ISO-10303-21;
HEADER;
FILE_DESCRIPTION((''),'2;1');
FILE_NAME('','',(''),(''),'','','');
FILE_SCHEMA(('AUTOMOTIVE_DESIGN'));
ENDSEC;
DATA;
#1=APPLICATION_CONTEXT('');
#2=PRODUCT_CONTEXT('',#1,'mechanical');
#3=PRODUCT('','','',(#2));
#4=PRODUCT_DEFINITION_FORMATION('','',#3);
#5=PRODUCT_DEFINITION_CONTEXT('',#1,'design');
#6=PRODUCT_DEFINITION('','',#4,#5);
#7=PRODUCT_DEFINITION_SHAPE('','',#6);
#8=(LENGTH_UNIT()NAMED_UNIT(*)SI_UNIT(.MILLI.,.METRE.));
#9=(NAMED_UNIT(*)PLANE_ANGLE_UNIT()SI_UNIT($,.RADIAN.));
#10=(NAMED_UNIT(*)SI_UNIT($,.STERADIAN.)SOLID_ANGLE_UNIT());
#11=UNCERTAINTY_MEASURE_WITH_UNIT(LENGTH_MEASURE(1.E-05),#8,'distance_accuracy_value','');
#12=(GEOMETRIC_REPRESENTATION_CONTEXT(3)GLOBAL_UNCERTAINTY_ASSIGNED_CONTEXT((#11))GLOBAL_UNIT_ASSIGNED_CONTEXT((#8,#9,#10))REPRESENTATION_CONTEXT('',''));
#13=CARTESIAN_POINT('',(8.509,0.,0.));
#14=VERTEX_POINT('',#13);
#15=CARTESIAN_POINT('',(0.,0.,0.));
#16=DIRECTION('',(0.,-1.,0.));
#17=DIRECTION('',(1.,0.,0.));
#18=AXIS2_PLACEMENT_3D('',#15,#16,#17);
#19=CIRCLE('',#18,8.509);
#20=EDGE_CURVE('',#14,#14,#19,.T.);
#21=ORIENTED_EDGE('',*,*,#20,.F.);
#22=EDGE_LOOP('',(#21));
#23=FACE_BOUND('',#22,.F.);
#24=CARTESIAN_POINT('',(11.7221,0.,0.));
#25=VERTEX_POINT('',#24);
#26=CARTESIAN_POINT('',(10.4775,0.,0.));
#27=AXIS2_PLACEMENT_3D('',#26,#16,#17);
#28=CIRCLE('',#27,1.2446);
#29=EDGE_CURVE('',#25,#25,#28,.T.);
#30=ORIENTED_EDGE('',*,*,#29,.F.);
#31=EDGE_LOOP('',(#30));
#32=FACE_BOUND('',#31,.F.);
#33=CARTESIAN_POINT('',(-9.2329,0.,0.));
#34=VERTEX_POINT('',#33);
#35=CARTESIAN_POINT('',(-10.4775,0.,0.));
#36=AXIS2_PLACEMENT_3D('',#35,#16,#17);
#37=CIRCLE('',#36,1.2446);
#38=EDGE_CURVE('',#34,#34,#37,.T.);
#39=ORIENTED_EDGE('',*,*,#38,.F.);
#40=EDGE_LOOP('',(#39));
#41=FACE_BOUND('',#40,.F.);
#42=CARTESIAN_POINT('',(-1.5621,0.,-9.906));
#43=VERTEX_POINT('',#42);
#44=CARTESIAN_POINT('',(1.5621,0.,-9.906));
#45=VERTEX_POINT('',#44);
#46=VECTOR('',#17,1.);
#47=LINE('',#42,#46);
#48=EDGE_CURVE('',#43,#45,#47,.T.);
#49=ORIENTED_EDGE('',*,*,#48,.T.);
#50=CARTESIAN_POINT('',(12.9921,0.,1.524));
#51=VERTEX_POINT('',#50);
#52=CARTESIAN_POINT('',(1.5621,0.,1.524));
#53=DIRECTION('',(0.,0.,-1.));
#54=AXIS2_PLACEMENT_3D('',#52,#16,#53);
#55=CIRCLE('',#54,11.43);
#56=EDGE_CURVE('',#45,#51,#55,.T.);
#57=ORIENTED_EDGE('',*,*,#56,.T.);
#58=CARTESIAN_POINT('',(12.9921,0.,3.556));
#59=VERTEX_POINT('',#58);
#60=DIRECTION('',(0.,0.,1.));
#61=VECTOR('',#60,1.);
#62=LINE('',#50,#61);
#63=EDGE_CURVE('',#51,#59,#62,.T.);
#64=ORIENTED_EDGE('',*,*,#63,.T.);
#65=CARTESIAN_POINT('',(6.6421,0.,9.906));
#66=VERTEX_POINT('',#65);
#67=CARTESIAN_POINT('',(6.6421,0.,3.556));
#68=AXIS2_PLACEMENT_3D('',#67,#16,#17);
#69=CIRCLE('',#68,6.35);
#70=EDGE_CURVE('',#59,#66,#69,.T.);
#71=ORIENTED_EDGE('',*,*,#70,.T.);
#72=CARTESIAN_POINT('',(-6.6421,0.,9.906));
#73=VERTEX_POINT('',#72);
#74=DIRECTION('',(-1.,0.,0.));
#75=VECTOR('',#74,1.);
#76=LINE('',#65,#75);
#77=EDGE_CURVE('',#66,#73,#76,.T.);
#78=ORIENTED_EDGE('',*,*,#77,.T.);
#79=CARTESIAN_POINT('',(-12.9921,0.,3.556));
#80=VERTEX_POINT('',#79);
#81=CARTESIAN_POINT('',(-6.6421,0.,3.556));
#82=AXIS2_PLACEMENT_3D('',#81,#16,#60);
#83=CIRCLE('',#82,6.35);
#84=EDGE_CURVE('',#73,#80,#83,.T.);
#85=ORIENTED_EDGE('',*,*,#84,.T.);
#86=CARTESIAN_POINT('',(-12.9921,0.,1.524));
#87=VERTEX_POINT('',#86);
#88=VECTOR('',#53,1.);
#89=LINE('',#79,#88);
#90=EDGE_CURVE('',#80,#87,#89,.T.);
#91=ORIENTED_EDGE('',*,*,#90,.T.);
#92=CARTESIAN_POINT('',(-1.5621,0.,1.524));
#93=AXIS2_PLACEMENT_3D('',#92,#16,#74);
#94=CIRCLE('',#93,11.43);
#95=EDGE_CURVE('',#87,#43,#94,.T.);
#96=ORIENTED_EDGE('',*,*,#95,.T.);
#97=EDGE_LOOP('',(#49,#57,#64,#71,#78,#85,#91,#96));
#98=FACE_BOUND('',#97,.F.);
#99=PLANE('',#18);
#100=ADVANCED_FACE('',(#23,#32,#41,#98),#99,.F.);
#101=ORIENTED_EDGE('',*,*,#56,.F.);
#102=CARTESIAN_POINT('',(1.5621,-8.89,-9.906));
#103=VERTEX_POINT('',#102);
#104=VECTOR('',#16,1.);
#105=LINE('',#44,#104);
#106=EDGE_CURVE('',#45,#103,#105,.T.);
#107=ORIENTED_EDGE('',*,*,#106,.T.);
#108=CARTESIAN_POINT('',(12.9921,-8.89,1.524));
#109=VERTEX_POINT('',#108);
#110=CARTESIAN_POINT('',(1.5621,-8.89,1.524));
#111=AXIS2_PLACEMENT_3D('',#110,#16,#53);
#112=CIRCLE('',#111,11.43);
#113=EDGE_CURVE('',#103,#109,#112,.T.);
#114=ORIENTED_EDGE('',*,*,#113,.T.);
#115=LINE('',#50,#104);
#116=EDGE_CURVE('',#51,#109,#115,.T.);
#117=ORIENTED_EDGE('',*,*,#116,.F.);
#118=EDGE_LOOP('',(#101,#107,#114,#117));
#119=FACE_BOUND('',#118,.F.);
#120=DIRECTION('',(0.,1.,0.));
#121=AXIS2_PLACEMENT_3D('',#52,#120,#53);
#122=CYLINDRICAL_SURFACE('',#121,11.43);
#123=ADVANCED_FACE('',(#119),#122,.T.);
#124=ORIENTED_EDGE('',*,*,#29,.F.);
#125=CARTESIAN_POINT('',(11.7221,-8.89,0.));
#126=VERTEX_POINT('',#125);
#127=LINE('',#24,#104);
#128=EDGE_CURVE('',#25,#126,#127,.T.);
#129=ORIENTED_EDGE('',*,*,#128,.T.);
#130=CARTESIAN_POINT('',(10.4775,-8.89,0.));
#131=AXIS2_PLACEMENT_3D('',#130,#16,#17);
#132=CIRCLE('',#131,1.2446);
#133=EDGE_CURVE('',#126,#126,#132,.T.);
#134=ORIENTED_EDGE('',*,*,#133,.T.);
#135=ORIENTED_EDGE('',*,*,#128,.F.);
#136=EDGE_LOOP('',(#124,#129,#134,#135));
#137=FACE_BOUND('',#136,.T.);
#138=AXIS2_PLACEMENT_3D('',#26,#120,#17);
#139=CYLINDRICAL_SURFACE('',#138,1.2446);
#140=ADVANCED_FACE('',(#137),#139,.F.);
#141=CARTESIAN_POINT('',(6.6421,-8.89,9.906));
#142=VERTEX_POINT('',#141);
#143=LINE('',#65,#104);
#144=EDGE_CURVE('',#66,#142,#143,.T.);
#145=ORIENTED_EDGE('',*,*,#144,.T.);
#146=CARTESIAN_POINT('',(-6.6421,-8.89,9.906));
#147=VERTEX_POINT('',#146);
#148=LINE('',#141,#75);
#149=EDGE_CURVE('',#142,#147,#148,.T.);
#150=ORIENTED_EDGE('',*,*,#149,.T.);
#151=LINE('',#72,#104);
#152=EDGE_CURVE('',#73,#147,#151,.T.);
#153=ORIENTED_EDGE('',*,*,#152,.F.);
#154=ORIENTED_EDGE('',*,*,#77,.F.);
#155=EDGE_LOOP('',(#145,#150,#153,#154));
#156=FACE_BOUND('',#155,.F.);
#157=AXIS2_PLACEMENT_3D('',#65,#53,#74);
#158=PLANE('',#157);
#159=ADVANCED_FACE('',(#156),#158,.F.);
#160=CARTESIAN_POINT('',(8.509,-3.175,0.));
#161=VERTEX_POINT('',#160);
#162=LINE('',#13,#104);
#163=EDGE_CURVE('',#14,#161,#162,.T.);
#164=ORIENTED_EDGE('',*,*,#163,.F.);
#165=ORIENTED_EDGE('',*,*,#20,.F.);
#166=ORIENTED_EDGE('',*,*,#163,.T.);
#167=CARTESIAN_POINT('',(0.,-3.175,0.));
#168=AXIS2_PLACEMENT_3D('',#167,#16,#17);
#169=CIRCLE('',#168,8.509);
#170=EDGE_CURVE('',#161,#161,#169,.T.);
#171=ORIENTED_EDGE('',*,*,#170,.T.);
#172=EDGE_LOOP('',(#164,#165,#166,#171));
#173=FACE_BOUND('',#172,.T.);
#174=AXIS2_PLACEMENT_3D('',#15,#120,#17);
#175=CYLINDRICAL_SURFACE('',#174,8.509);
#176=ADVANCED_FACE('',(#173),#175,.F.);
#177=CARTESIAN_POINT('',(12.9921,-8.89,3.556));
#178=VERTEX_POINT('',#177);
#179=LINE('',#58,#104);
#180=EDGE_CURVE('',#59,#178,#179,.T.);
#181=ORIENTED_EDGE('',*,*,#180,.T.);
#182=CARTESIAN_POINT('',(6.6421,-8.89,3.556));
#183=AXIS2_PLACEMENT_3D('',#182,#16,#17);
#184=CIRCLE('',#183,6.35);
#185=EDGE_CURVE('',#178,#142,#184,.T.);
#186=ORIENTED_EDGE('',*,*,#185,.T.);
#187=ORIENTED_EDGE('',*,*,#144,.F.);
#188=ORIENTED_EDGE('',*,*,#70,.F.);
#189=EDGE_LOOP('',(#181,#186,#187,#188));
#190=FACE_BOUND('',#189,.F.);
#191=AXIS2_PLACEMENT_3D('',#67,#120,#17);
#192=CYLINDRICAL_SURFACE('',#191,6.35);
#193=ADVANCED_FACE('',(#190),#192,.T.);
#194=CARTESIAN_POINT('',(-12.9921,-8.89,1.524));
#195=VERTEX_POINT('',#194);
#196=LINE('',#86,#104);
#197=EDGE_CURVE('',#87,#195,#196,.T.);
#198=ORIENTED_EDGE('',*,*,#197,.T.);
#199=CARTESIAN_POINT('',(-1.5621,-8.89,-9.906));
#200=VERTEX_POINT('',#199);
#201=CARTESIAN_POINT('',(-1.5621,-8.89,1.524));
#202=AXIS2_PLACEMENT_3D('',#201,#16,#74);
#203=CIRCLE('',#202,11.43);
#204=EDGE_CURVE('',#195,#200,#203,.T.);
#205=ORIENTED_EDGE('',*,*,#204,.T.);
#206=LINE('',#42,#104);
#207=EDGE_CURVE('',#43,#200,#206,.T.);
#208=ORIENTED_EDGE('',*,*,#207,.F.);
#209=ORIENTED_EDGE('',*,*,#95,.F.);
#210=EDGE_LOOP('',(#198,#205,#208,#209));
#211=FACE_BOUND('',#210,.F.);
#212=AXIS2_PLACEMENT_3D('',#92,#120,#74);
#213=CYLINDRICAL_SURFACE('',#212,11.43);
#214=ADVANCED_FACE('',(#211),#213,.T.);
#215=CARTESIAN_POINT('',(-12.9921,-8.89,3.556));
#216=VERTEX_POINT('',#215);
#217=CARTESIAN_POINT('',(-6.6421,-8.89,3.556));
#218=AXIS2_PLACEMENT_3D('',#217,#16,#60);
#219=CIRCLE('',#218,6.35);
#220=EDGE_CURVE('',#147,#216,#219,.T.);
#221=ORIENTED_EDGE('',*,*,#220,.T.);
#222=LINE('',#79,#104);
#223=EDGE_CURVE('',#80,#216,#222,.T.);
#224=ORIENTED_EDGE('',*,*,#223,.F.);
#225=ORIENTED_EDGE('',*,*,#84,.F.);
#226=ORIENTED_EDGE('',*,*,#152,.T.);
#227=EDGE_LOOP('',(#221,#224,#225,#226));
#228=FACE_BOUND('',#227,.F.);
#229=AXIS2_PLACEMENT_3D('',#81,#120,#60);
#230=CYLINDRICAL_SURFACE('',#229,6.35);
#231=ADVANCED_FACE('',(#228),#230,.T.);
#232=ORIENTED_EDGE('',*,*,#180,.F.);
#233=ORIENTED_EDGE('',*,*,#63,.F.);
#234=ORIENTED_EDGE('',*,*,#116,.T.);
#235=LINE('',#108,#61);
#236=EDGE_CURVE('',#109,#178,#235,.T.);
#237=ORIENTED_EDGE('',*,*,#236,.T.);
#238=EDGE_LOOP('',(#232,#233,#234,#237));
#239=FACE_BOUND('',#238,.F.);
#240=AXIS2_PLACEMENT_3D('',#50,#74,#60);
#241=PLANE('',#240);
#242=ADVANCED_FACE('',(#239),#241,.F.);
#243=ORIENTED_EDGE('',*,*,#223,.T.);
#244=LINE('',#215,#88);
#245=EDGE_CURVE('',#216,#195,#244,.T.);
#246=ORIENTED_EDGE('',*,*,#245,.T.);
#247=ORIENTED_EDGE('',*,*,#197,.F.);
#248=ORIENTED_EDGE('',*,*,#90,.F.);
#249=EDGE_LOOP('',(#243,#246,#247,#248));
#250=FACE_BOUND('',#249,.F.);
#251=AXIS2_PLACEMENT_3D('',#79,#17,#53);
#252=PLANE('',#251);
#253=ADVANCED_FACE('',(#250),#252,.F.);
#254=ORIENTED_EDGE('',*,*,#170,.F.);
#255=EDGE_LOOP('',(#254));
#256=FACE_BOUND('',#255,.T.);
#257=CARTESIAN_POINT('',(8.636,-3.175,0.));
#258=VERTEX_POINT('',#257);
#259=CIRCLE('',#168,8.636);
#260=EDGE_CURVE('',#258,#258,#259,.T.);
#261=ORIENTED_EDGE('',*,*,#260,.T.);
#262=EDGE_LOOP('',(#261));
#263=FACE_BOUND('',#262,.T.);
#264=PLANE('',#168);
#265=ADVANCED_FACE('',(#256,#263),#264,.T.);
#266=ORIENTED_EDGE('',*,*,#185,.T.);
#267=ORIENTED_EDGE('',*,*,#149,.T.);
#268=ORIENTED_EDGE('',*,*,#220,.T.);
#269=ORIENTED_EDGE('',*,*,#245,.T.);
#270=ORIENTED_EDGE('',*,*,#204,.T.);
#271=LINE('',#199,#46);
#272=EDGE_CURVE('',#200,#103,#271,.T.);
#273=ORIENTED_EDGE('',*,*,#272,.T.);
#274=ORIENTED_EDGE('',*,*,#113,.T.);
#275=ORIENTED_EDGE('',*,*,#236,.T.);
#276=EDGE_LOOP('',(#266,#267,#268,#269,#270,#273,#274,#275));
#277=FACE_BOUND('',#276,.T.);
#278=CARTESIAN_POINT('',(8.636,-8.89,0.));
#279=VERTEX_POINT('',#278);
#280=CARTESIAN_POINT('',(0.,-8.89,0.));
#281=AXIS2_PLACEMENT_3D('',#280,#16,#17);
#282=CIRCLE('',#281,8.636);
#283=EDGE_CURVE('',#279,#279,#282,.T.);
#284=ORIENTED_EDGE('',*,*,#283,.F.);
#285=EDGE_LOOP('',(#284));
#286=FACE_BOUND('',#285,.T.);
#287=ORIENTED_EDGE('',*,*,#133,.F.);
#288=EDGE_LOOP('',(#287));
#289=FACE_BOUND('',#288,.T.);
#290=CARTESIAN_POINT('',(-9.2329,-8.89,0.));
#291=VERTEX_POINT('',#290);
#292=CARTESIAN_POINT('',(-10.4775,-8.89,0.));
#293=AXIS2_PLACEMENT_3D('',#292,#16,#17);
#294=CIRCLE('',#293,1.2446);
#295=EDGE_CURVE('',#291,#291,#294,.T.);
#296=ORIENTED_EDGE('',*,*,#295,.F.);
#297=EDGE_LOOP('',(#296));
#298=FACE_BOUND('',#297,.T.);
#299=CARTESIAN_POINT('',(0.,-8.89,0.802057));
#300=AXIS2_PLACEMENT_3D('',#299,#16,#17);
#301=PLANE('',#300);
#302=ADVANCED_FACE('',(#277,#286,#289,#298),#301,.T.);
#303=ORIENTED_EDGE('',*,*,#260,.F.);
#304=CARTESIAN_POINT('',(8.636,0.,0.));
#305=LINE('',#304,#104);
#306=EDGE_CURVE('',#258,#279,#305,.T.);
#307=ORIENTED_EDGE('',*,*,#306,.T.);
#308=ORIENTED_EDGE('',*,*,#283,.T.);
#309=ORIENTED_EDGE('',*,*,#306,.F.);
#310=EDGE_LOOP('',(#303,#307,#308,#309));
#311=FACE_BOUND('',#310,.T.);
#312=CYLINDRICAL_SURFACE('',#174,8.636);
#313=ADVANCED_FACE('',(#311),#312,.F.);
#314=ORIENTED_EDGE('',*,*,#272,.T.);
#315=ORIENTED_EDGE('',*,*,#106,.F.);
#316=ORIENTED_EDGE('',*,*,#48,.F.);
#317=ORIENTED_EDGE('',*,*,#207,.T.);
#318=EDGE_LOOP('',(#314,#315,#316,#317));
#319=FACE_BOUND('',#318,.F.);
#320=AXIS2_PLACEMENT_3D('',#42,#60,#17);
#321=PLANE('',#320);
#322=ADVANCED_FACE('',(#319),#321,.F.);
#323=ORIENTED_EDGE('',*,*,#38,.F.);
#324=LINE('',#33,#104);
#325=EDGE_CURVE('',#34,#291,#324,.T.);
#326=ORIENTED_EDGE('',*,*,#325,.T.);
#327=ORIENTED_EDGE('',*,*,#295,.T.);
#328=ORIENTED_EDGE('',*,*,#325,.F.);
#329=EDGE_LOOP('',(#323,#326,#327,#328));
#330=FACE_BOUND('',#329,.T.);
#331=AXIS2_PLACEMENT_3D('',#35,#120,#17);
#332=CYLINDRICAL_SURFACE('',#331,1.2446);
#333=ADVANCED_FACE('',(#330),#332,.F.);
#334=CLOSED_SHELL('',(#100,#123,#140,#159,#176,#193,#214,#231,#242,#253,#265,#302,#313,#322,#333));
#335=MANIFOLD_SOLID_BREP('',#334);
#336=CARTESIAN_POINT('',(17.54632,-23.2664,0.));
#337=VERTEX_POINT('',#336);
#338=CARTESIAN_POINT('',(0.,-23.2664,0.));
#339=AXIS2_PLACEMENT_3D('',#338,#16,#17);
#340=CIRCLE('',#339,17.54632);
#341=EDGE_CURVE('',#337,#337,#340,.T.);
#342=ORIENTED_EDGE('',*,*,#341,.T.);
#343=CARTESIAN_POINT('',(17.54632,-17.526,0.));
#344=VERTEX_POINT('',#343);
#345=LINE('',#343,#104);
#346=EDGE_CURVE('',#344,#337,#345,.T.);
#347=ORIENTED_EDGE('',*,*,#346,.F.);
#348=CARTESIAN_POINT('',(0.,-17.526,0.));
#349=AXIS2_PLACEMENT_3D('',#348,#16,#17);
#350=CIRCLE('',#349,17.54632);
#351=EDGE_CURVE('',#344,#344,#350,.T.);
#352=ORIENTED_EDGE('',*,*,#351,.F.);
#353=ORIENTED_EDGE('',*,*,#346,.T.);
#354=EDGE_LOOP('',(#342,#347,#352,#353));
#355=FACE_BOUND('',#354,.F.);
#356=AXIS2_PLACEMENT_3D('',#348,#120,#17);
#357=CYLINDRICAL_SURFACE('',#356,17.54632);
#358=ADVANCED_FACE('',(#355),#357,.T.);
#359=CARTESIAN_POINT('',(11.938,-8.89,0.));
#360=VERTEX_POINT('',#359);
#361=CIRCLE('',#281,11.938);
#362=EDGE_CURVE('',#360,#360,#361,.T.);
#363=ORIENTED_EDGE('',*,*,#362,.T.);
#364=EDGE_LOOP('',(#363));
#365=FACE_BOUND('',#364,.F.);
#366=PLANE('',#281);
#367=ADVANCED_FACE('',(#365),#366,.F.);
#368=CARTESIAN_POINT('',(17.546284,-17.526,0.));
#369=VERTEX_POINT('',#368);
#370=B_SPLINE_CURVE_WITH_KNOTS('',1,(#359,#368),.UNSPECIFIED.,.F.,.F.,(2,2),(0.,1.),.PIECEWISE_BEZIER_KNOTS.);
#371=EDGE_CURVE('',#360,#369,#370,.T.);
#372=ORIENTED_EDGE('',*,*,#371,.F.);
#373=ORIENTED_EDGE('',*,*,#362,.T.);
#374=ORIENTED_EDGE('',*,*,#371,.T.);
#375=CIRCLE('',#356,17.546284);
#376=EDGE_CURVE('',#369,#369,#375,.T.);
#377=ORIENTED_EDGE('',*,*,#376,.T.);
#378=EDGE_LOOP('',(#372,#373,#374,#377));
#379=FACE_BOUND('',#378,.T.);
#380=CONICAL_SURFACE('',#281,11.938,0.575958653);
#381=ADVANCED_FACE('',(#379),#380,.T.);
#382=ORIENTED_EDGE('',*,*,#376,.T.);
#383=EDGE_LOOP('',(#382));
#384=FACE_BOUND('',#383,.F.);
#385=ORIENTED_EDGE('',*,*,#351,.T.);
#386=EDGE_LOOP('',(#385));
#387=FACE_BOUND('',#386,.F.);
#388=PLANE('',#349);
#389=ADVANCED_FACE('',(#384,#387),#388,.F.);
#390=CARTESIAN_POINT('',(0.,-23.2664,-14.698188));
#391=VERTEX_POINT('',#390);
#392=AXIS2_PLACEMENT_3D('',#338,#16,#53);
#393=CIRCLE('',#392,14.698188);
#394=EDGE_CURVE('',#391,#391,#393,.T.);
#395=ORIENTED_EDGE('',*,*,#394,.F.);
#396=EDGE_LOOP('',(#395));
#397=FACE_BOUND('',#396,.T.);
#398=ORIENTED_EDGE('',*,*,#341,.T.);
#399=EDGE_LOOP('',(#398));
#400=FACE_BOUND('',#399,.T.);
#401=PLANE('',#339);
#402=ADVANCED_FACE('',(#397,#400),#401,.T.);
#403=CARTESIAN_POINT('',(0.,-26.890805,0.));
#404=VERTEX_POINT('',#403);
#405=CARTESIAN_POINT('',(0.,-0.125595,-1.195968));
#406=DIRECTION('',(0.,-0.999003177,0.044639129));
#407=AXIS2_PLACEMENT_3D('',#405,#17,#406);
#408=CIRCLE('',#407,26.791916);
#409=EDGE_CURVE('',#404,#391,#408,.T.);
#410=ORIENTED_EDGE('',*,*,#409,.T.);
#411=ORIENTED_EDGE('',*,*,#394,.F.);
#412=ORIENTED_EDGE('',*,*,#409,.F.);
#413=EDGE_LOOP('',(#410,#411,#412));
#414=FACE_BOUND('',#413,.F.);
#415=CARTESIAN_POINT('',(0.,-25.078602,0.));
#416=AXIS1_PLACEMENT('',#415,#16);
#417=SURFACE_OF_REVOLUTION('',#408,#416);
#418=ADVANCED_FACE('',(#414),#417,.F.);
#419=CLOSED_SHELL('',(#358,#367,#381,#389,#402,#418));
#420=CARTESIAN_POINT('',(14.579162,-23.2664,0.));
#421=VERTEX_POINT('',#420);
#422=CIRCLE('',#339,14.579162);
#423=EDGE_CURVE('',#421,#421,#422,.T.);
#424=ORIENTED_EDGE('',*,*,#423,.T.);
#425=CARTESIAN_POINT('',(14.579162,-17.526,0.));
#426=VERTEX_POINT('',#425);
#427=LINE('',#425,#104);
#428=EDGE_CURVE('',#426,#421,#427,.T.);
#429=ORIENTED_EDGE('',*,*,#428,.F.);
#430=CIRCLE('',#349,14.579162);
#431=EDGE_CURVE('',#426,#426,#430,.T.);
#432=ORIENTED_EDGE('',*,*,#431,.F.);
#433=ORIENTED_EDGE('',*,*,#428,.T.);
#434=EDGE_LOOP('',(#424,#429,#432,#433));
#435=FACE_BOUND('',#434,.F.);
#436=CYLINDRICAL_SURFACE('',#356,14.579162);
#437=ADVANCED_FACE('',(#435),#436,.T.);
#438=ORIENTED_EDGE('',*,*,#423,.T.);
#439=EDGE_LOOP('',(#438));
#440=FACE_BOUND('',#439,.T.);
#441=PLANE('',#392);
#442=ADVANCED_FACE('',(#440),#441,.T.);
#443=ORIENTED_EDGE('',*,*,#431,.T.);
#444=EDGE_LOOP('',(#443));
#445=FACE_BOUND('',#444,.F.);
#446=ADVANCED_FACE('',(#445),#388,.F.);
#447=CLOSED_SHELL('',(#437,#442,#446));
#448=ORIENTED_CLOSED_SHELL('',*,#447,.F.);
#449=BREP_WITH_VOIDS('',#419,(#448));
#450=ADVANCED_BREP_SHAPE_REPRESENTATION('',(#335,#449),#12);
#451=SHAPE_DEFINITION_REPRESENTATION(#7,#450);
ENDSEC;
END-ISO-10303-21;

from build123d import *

# Parameters (mm, degrees)
F0_R     = 1.2446
F0_R_2   = 8.636
F1_DEPTH = 8.89
F0_R_3   = 8.509
F2_DEPTH = 3.175
F3_R     = 11.938
F4_DEPTH = 8.636
F4_TAPER = -33
F5_R     = 17.54632
F5_R_2   = 14.5791622743
F6_DEPTH = 5.7404


with BuildPart() as f1:
    # F0 (on Front) → F1 (new body)
    with BuildSketch(Plane.XZ):
        with BuildLine():
            Line((6.6421, 9.906), (-6.6421, 9.906))
            ThreePointArc((-6.6421, 9.906), (-11.1322280605, 8.0461280605), (-12.9921, 3.556))
            Line((-12.9921, 3.556), (-12.9921, 1.524))
            ThreePointArc((-12.9921, 1.524), (-9.644330509, -6.558230509), (-1.5621, -9.906))
            Line((-1.5621, -9.906), (1.5621, -9.906))
            ThreePointArc((1.5621, -9.906), (9.644330509, -6.558230509), (12.9921, 1.524))
            Line((12.9921, 1.524), (12.9921, 3.556))
            ThreePointArc((12.9921, 3.556), (11.1322280605, 8.0461280605), (6.6421, 9.906))
        make_face()
        with Locations((-10.4775, 0)):
            Circle(F0_R, mode=Mode.SUBTRACT)
        Circle(F0_R_2, mode=Mode.SUBTRACT)
        with Locations((10.4775, 0)):
            Circle(F0_R, mode=Mode.SUBTRACT)
    extrude(amount=F1_DEPTH)

    # F0 (on Front) → F2 (join)
    with BuildSketch(Plane.XZ):
        Circle(F0_R_2)
        Circle(F0_R_3, mode=Mode.SUBTRACT)
    extrude(amount=F2_DEPTH)


with BuildPart() as f4:
    # F3 (on face) → F4 (new body)
    with BuildSketch(Plane.XZ.offset(8.89)):
        Circle(F3_R)
    extrude(amount=F4_DEPTH, taper=F4_TAPER)

    # F5 (on face) → F6 (join)
    with BuildSketch(Plane.XZ.offset(17.526)):
        Circle(F5_R)
        Circle(F5_R_2, mode=Mode.SUBTRACT)
    extrude(amount=F6_DEPTH)

    # F7 (on Right) → F8 (revolve)
    with BuildSketch(Plane.YZ):
        with BuildLine():
            Line((-23.2664, 0), (-26.8908049911, 0))
            ThreePointArc((-26.8908049911, 0), (-26.1383181436, -7.6104076675), (-23.2664, -14.6981878206))
            Line((-23.2664, -14.6981878206), (-23.2664, 0))
        make_face()
    revolve(axis=Axis((0, -25.0786024956, 0), (0, -1, 0)))


solid = Compound([f1.part, f4.part])
